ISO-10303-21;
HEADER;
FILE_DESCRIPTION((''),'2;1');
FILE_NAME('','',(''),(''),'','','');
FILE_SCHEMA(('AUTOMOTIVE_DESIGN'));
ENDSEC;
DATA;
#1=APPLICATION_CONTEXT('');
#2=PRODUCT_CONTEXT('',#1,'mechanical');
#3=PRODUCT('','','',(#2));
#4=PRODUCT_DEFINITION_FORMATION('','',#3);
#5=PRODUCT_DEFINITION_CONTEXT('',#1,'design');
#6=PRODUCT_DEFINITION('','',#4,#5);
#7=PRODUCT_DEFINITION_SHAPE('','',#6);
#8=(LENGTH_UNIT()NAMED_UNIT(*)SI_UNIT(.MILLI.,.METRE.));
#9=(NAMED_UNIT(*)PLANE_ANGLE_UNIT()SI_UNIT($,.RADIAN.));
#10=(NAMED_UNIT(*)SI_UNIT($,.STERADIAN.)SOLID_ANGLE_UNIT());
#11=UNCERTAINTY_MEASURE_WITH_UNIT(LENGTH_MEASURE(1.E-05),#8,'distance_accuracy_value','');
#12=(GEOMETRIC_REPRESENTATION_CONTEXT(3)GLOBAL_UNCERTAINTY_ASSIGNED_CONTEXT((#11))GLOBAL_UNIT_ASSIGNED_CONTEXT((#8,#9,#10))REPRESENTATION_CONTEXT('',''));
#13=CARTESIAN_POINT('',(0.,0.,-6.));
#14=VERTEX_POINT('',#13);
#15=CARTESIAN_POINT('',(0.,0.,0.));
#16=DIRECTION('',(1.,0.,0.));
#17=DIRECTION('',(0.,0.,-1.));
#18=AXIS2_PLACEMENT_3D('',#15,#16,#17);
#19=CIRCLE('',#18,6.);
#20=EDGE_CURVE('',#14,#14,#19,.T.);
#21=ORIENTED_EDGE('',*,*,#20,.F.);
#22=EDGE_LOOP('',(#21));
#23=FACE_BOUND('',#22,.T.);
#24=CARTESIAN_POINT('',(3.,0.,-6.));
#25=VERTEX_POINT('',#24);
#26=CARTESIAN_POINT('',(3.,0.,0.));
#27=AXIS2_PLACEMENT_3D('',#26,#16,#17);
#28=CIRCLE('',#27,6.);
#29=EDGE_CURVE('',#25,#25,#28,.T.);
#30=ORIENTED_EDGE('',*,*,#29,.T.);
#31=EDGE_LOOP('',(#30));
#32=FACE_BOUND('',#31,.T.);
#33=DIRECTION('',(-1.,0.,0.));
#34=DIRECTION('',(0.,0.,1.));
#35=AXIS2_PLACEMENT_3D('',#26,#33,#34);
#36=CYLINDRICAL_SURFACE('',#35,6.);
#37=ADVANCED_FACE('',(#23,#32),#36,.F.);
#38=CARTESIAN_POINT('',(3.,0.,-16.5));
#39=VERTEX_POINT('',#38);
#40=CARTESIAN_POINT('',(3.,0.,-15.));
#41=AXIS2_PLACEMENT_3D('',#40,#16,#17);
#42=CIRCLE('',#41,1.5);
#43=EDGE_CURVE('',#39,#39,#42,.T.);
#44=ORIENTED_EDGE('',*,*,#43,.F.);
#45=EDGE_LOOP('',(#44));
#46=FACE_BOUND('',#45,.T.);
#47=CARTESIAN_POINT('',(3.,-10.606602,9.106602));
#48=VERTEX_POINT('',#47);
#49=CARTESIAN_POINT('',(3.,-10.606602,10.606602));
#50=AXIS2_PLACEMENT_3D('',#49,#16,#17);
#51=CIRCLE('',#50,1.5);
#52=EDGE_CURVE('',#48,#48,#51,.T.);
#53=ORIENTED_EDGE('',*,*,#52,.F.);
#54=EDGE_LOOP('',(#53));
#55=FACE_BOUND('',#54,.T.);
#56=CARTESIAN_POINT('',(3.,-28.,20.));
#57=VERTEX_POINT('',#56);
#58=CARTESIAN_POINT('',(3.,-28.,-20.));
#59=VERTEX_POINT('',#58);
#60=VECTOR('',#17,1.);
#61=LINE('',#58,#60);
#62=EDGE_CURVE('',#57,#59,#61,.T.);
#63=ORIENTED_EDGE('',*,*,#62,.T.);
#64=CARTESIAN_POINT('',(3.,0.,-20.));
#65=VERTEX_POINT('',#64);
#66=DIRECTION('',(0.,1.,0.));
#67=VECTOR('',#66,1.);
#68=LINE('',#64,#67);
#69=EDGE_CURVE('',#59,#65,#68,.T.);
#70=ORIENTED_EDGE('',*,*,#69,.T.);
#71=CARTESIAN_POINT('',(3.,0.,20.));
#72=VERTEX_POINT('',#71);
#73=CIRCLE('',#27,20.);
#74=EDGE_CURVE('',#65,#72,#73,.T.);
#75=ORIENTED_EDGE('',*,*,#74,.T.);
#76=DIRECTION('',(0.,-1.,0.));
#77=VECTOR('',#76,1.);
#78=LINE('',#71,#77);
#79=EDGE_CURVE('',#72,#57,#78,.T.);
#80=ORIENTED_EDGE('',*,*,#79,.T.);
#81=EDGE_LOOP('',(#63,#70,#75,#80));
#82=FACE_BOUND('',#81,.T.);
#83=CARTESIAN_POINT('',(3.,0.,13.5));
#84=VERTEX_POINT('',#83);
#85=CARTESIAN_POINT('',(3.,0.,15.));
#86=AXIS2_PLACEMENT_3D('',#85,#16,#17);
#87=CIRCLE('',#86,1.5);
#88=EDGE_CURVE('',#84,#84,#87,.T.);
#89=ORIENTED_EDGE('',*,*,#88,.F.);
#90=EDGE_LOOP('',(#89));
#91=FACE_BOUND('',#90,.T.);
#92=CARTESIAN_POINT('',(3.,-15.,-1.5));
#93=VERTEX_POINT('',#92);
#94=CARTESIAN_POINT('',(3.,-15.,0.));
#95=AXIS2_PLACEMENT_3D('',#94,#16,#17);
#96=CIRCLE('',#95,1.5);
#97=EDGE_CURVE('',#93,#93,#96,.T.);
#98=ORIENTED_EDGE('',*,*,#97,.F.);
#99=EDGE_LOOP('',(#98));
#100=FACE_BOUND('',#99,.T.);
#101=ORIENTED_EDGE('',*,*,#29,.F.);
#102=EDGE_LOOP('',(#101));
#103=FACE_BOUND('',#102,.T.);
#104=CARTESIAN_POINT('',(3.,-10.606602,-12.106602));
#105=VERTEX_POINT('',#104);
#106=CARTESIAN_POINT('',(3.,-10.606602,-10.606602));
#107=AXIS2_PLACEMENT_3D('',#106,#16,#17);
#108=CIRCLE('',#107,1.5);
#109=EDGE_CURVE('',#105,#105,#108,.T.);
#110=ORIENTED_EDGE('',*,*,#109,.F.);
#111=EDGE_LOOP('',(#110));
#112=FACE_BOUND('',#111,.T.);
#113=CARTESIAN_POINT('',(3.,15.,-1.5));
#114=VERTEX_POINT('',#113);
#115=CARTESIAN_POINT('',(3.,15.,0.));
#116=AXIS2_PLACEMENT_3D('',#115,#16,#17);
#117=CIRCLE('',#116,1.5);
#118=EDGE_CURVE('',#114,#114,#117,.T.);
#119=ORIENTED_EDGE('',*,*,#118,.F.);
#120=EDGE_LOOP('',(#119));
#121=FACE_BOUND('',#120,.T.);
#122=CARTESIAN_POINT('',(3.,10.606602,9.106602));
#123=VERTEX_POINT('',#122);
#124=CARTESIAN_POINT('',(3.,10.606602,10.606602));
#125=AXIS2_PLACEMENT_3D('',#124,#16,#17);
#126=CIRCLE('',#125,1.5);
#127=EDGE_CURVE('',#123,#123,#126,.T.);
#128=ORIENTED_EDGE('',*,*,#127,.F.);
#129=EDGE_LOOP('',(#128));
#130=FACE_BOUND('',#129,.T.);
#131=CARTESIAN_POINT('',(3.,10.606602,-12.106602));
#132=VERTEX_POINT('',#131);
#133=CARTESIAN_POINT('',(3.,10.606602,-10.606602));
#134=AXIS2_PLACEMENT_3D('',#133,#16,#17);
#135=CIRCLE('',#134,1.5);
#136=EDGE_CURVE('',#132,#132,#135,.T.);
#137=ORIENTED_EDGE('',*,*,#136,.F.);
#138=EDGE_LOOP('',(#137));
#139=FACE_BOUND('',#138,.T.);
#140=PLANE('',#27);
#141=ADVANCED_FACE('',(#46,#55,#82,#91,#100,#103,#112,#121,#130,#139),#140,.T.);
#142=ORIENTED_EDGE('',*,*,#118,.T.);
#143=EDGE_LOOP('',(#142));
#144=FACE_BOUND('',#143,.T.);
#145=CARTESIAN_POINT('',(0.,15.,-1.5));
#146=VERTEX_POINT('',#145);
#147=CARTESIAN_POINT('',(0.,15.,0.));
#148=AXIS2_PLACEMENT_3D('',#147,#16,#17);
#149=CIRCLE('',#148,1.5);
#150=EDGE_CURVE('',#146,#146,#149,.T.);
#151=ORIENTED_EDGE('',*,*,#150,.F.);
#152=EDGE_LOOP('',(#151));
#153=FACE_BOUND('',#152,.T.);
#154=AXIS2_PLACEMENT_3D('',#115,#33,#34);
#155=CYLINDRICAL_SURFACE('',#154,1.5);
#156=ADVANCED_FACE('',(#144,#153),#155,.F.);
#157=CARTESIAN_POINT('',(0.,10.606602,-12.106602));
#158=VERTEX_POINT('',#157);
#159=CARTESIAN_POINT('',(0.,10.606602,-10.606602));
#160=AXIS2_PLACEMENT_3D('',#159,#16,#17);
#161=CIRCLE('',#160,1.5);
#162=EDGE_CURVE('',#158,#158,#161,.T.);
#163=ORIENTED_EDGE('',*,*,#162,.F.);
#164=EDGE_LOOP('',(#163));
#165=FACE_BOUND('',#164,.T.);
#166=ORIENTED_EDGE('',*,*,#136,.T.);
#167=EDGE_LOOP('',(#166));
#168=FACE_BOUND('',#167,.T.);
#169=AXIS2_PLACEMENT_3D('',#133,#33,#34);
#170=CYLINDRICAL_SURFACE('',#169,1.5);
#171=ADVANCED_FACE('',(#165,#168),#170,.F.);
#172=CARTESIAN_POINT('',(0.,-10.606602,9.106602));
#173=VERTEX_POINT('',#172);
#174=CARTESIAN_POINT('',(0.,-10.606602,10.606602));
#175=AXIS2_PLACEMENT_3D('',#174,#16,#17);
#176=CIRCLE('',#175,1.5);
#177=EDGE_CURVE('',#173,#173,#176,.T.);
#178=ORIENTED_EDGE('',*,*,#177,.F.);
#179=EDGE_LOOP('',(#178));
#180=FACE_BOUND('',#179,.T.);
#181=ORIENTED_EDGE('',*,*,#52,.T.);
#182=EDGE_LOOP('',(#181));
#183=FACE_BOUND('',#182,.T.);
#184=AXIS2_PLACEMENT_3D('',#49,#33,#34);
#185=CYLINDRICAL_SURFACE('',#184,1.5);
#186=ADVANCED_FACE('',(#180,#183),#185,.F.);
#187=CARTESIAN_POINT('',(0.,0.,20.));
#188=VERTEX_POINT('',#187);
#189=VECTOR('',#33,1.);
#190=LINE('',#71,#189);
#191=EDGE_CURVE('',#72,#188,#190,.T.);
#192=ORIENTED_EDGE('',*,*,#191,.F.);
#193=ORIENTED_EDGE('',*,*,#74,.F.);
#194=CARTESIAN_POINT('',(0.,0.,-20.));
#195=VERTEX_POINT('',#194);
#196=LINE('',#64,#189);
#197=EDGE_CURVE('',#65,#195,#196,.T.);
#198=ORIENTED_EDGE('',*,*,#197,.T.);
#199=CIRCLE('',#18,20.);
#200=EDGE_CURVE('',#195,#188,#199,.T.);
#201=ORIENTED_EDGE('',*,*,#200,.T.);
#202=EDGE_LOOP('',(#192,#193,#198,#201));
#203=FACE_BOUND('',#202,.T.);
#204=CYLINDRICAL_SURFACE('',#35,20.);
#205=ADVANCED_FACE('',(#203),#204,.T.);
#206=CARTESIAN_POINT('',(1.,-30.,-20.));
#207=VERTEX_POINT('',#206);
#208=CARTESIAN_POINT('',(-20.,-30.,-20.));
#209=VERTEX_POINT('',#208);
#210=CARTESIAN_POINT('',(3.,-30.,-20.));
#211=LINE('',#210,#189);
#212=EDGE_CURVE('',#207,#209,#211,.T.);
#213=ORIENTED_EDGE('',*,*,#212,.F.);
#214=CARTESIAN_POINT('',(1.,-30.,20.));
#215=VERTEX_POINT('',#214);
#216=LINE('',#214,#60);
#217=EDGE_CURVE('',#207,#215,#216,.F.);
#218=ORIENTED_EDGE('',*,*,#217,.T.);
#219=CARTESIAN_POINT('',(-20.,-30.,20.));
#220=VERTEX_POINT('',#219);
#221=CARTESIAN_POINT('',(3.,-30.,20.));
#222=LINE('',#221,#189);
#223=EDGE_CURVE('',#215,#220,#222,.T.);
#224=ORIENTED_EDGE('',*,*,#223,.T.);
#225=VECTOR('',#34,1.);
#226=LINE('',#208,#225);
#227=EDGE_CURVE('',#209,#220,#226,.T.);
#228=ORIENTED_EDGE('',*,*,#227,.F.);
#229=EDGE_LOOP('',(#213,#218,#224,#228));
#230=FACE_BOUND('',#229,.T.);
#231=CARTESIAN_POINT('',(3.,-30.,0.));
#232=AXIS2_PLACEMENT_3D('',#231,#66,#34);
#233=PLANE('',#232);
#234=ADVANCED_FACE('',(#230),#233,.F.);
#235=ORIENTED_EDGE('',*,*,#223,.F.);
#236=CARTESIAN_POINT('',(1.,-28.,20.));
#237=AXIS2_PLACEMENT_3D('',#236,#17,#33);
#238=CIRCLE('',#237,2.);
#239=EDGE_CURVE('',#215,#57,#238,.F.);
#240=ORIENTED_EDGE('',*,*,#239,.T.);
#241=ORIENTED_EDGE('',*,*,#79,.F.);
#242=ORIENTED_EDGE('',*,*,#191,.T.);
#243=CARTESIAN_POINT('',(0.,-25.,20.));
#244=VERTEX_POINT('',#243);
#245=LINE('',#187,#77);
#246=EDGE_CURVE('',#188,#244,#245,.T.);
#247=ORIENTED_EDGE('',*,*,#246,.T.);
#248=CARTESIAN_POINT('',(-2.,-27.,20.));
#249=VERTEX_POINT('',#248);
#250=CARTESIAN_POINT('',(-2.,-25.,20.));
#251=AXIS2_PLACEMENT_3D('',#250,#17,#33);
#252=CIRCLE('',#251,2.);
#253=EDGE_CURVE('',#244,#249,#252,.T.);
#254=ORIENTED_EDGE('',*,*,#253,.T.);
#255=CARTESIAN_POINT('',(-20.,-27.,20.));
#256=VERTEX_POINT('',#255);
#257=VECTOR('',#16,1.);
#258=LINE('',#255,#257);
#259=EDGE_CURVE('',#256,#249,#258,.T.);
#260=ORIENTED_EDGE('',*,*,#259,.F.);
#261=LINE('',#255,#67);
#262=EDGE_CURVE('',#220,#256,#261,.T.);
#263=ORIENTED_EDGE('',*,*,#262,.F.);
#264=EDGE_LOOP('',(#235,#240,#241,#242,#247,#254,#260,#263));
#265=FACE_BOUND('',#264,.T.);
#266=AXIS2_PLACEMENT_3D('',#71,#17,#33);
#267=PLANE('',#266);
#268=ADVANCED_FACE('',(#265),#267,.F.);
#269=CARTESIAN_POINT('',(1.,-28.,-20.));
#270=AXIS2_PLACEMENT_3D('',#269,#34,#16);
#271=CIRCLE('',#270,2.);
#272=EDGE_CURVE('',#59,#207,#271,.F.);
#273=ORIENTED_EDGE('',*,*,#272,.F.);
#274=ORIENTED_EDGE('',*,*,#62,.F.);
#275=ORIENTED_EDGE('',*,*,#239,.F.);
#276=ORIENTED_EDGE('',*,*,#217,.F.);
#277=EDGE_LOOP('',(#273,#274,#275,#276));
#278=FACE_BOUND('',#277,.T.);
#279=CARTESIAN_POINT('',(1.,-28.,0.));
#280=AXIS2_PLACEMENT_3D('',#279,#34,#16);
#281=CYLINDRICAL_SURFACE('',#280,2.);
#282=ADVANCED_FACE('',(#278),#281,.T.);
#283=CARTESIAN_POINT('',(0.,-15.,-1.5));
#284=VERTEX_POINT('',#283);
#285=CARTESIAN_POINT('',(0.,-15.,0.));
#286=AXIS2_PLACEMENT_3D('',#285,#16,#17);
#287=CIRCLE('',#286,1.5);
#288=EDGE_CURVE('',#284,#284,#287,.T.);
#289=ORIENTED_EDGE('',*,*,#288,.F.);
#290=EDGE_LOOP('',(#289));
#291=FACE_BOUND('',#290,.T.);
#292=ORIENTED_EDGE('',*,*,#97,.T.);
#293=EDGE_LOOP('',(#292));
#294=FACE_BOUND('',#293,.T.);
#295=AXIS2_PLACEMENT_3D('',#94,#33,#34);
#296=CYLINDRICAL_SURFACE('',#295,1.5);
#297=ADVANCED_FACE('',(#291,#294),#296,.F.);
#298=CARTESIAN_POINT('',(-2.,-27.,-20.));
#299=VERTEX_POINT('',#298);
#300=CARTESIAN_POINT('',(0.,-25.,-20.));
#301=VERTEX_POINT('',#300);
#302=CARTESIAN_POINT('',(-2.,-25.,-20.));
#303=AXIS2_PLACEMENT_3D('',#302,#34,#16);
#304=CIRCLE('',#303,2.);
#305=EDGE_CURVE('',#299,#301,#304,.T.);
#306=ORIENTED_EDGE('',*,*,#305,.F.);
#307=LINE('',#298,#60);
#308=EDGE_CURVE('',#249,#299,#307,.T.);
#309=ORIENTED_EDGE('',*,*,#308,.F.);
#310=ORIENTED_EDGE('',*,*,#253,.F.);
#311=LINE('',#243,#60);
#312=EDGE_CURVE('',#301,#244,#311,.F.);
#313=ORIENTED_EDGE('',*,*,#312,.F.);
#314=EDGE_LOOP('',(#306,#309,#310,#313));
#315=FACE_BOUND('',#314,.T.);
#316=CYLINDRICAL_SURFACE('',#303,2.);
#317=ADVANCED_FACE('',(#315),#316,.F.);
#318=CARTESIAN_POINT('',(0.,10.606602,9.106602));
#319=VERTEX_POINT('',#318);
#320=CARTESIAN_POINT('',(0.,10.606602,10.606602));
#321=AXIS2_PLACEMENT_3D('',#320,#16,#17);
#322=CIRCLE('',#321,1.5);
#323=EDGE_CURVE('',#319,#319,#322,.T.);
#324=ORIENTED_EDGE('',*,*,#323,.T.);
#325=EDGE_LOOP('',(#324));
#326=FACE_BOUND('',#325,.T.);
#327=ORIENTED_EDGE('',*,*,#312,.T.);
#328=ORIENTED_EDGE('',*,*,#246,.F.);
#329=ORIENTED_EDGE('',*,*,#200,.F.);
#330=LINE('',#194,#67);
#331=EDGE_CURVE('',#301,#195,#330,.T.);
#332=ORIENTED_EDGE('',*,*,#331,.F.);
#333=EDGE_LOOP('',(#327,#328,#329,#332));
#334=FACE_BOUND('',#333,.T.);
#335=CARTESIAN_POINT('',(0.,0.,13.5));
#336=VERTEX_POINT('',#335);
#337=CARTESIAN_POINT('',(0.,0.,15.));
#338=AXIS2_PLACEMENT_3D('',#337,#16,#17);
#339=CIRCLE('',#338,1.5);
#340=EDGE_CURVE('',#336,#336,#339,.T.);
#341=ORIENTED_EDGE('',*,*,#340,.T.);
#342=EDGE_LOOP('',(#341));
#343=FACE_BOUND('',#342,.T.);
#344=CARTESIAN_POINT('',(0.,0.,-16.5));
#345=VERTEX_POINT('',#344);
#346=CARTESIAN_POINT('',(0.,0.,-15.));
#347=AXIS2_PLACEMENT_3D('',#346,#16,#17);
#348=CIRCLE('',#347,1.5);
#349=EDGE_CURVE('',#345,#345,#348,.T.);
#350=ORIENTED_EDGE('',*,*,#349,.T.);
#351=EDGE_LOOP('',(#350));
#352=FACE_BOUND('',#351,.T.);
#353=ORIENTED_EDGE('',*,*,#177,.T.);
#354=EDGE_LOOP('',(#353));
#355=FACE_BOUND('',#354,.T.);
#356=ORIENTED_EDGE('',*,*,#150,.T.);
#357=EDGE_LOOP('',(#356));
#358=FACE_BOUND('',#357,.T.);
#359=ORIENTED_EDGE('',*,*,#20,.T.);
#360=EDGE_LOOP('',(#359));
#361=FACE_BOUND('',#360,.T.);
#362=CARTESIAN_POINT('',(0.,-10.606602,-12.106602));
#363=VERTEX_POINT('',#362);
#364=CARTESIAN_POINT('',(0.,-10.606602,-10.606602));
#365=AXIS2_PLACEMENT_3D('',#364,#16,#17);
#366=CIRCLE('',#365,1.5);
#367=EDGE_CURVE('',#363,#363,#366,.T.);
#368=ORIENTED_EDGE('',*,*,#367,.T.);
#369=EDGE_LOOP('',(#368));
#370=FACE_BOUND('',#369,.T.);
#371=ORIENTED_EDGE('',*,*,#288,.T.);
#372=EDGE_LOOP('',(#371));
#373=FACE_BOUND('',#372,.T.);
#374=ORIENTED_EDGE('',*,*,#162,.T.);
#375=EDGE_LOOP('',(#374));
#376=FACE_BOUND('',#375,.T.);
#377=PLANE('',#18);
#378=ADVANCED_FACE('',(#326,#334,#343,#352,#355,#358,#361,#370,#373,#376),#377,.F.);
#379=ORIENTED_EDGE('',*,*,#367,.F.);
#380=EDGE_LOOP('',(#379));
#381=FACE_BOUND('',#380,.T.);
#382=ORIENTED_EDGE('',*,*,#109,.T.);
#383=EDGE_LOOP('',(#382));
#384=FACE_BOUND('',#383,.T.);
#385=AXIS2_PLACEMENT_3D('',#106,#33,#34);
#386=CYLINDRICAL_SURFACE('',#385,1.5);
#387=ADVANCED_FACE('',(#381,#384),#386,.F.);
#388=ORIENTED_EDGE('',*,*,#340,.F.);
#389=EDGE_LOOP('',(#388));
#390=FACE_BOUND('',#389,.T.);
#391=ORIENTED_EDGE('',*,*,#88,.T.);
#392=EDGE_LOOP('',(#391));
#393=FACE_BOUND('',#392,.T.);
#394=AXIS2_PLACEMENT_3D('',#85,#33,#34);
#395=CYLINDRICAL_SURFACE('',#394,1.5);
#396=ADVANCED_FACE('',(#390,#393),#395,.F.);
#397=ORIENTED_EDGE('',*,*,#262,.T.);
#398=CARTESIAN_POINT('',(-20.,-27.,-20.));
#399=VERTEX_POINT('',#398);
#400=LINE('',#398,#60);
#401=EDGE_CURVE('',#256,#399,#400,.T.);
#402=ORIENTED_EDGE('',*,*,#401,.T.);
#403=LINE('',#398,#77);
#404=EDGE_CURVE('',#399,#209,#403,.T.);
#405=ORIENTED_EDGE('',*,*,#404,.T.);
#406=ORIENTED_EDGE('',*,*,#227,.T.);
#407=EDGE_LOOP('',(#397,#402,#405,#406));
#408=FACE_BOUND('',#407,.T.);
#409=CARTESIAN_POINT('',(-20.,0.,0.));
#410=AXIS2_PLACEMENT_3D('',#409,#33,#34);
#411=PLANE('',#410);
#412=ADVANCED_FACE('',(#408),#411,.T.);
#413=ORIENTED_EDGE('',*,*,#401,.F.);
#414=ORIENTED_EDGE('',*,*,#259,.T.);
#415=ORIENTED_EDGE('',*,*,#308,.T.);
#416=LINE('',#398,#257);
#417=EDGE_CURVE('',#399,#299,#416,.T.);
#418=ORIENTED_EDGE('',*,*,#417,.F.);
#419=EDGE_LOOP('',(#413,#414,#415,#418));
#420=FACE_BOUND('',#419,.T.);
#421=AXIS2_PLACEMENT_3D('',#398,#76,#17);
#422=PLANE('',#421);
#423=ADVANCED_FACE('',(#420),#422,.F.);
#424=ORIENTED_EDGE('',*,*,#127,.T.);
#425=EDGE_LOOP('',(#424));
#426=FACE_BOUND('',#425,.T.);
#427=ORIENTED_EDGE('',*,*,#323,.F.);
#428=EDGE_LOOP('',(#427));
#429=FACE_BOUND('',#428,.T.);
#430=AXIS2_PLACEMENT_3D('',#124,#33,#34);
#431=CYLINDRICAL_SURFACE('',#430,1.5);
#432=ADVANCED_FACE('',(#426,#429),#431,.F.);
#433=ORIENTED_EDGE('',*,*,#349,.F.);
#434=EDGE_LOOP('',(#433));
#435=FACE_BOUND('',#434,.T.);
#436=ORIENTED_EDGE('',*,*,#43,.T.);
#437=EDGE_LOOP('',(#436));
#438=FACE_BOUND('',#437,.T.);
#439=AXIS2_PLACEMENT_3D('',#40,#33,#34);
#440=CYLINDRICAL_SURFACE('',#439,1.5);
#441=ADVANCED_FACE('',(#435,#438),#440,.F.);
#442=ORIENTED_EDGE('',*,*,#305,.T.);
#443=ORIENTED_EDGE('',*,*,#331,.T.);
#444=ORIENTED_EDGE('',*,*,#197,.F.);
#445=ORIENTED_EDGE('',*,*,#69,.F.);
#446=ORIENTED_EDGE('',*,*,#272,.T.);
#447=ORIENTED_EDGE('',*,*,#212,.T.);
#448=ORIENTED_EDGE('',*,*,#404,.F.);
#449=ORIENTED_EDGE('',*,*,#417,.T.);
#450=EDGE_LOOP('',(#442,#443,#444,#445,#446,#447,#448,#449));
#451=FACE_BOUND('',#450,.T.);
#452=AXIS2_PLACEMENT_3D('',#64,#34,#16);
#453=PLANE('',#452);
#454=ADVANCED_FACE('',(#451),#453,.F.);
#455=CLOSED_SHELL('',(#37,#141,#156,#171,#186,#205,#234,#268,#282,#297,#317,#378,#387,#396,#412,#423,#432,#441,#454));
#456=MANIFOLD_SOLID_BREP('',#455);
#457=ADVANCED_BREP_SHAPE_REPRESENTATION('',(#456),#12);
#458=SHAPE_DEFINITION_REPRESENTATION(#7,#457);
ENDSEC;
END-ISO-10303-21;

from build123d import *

# Parameters (mm, degrees)
BOSS_EXTRUDE1_OUTLINE_R   = 1.5
BOSS_EXTRUDE1_OUTLINE_R_2 = 6
BOSS_EXTRUDE1_DEPTH       = 3
SKETCH2_W                 = 40
SKETCH2_H                 = 3
BOSS_EXTRUDE2_DEPTH       = 20
FILLET1_R                 = 2
FILLET2_R                 = 2


# Read off the part's stored shape, not the designer's step: Boss-Extrude1
with BuildPart() as part:
    # Boss-Extrude1 outline → Boss-Extrude1 (new body)
    with BuildSketch(Plane(origin=(0, 0, 0), x_dir=(0, 0, -1), z_dir=(1, 0, 0))):
        with BuildLine():
            Line((20, -30), (20, 0))
            ThreePointArc((20, 0), (0, 20), (-20, 0))
            Line((-20, 0), (-20, -30))
            Line((-20, -30), (20, -30))
        make_face()
        with Locations((-10.606601718, -10.606601718)):
            Circle(BOSS_EXTRUDE1_OUTLINE_R, mode=Mode.SUBTRACT)
        with Locations((0, -15)):
            Circle(BOSS_EXTRUDE1_OUTLINE_R, mode=Mode.SUBTRACT)
        with Locations((10.606601718, -10.606601718)):
            Circle(BOSS_EXTRUDE1_OUTLINE_R, mode=Mode.SUBTRACT)
        with Locations((-15, 0)):
            Circle(BOSS_EXTRUDE1_OUTLINE_R, mode=Mode.SUBTRACT)
        with Locations((-10.606601718, 10.606601718)):
            Circle(BOSS_EXTRUDE1_OUTLINE_R, mode=Mode.SUBTRACT)
        Circle(BOSS_EXTRUDE1_OUTLINE_R_2, mode=Mode.SUBTRACT)
        with Locations((15, 0)):
            Circle(BOSS_EXTRUDE1_OUTLINE_R, mode=Mode.SUBTRACT)
        with Locations((0, 15)):
            Circle(BOSS_EXTRUDE1_OUTLINE_R, mode=Mode.SUBTRACT)
        with Locations((10.606601718, 10.606601718)):
            Circle(BOSS_EXTRUDE1_OUTLINE_R, mode=Mode.SUBTRACT)
    extrude(amount=BOSS_EXTRUDE1_DEPTH)

    # Sketch2 → Boss-Extrude2 (add)
    with BuildSketch(Plane.ZY):
        with Locations((0, -28.5)):
            Rectangle(SKETCH2_W, SKETCH2_H)
    extrude(amount=BOSS_EXTRUDE2_DEPTH)

    # Fillet1
    fillet1_edges = [part.edges().sort_by_distance(p)[0] for p in [
        (3, -30, 0),
    ]]
    fillet(fillet1_edges, radius=FILLET1_R)

    # Fillet2
    fillet2_edges = [part.edges().sort_by_distance(p)[0] for p in [
        (0, -27, 0),
    ]]
    fillet(fillet2_edges, radius=FILLET2_R)


solid = part.part
